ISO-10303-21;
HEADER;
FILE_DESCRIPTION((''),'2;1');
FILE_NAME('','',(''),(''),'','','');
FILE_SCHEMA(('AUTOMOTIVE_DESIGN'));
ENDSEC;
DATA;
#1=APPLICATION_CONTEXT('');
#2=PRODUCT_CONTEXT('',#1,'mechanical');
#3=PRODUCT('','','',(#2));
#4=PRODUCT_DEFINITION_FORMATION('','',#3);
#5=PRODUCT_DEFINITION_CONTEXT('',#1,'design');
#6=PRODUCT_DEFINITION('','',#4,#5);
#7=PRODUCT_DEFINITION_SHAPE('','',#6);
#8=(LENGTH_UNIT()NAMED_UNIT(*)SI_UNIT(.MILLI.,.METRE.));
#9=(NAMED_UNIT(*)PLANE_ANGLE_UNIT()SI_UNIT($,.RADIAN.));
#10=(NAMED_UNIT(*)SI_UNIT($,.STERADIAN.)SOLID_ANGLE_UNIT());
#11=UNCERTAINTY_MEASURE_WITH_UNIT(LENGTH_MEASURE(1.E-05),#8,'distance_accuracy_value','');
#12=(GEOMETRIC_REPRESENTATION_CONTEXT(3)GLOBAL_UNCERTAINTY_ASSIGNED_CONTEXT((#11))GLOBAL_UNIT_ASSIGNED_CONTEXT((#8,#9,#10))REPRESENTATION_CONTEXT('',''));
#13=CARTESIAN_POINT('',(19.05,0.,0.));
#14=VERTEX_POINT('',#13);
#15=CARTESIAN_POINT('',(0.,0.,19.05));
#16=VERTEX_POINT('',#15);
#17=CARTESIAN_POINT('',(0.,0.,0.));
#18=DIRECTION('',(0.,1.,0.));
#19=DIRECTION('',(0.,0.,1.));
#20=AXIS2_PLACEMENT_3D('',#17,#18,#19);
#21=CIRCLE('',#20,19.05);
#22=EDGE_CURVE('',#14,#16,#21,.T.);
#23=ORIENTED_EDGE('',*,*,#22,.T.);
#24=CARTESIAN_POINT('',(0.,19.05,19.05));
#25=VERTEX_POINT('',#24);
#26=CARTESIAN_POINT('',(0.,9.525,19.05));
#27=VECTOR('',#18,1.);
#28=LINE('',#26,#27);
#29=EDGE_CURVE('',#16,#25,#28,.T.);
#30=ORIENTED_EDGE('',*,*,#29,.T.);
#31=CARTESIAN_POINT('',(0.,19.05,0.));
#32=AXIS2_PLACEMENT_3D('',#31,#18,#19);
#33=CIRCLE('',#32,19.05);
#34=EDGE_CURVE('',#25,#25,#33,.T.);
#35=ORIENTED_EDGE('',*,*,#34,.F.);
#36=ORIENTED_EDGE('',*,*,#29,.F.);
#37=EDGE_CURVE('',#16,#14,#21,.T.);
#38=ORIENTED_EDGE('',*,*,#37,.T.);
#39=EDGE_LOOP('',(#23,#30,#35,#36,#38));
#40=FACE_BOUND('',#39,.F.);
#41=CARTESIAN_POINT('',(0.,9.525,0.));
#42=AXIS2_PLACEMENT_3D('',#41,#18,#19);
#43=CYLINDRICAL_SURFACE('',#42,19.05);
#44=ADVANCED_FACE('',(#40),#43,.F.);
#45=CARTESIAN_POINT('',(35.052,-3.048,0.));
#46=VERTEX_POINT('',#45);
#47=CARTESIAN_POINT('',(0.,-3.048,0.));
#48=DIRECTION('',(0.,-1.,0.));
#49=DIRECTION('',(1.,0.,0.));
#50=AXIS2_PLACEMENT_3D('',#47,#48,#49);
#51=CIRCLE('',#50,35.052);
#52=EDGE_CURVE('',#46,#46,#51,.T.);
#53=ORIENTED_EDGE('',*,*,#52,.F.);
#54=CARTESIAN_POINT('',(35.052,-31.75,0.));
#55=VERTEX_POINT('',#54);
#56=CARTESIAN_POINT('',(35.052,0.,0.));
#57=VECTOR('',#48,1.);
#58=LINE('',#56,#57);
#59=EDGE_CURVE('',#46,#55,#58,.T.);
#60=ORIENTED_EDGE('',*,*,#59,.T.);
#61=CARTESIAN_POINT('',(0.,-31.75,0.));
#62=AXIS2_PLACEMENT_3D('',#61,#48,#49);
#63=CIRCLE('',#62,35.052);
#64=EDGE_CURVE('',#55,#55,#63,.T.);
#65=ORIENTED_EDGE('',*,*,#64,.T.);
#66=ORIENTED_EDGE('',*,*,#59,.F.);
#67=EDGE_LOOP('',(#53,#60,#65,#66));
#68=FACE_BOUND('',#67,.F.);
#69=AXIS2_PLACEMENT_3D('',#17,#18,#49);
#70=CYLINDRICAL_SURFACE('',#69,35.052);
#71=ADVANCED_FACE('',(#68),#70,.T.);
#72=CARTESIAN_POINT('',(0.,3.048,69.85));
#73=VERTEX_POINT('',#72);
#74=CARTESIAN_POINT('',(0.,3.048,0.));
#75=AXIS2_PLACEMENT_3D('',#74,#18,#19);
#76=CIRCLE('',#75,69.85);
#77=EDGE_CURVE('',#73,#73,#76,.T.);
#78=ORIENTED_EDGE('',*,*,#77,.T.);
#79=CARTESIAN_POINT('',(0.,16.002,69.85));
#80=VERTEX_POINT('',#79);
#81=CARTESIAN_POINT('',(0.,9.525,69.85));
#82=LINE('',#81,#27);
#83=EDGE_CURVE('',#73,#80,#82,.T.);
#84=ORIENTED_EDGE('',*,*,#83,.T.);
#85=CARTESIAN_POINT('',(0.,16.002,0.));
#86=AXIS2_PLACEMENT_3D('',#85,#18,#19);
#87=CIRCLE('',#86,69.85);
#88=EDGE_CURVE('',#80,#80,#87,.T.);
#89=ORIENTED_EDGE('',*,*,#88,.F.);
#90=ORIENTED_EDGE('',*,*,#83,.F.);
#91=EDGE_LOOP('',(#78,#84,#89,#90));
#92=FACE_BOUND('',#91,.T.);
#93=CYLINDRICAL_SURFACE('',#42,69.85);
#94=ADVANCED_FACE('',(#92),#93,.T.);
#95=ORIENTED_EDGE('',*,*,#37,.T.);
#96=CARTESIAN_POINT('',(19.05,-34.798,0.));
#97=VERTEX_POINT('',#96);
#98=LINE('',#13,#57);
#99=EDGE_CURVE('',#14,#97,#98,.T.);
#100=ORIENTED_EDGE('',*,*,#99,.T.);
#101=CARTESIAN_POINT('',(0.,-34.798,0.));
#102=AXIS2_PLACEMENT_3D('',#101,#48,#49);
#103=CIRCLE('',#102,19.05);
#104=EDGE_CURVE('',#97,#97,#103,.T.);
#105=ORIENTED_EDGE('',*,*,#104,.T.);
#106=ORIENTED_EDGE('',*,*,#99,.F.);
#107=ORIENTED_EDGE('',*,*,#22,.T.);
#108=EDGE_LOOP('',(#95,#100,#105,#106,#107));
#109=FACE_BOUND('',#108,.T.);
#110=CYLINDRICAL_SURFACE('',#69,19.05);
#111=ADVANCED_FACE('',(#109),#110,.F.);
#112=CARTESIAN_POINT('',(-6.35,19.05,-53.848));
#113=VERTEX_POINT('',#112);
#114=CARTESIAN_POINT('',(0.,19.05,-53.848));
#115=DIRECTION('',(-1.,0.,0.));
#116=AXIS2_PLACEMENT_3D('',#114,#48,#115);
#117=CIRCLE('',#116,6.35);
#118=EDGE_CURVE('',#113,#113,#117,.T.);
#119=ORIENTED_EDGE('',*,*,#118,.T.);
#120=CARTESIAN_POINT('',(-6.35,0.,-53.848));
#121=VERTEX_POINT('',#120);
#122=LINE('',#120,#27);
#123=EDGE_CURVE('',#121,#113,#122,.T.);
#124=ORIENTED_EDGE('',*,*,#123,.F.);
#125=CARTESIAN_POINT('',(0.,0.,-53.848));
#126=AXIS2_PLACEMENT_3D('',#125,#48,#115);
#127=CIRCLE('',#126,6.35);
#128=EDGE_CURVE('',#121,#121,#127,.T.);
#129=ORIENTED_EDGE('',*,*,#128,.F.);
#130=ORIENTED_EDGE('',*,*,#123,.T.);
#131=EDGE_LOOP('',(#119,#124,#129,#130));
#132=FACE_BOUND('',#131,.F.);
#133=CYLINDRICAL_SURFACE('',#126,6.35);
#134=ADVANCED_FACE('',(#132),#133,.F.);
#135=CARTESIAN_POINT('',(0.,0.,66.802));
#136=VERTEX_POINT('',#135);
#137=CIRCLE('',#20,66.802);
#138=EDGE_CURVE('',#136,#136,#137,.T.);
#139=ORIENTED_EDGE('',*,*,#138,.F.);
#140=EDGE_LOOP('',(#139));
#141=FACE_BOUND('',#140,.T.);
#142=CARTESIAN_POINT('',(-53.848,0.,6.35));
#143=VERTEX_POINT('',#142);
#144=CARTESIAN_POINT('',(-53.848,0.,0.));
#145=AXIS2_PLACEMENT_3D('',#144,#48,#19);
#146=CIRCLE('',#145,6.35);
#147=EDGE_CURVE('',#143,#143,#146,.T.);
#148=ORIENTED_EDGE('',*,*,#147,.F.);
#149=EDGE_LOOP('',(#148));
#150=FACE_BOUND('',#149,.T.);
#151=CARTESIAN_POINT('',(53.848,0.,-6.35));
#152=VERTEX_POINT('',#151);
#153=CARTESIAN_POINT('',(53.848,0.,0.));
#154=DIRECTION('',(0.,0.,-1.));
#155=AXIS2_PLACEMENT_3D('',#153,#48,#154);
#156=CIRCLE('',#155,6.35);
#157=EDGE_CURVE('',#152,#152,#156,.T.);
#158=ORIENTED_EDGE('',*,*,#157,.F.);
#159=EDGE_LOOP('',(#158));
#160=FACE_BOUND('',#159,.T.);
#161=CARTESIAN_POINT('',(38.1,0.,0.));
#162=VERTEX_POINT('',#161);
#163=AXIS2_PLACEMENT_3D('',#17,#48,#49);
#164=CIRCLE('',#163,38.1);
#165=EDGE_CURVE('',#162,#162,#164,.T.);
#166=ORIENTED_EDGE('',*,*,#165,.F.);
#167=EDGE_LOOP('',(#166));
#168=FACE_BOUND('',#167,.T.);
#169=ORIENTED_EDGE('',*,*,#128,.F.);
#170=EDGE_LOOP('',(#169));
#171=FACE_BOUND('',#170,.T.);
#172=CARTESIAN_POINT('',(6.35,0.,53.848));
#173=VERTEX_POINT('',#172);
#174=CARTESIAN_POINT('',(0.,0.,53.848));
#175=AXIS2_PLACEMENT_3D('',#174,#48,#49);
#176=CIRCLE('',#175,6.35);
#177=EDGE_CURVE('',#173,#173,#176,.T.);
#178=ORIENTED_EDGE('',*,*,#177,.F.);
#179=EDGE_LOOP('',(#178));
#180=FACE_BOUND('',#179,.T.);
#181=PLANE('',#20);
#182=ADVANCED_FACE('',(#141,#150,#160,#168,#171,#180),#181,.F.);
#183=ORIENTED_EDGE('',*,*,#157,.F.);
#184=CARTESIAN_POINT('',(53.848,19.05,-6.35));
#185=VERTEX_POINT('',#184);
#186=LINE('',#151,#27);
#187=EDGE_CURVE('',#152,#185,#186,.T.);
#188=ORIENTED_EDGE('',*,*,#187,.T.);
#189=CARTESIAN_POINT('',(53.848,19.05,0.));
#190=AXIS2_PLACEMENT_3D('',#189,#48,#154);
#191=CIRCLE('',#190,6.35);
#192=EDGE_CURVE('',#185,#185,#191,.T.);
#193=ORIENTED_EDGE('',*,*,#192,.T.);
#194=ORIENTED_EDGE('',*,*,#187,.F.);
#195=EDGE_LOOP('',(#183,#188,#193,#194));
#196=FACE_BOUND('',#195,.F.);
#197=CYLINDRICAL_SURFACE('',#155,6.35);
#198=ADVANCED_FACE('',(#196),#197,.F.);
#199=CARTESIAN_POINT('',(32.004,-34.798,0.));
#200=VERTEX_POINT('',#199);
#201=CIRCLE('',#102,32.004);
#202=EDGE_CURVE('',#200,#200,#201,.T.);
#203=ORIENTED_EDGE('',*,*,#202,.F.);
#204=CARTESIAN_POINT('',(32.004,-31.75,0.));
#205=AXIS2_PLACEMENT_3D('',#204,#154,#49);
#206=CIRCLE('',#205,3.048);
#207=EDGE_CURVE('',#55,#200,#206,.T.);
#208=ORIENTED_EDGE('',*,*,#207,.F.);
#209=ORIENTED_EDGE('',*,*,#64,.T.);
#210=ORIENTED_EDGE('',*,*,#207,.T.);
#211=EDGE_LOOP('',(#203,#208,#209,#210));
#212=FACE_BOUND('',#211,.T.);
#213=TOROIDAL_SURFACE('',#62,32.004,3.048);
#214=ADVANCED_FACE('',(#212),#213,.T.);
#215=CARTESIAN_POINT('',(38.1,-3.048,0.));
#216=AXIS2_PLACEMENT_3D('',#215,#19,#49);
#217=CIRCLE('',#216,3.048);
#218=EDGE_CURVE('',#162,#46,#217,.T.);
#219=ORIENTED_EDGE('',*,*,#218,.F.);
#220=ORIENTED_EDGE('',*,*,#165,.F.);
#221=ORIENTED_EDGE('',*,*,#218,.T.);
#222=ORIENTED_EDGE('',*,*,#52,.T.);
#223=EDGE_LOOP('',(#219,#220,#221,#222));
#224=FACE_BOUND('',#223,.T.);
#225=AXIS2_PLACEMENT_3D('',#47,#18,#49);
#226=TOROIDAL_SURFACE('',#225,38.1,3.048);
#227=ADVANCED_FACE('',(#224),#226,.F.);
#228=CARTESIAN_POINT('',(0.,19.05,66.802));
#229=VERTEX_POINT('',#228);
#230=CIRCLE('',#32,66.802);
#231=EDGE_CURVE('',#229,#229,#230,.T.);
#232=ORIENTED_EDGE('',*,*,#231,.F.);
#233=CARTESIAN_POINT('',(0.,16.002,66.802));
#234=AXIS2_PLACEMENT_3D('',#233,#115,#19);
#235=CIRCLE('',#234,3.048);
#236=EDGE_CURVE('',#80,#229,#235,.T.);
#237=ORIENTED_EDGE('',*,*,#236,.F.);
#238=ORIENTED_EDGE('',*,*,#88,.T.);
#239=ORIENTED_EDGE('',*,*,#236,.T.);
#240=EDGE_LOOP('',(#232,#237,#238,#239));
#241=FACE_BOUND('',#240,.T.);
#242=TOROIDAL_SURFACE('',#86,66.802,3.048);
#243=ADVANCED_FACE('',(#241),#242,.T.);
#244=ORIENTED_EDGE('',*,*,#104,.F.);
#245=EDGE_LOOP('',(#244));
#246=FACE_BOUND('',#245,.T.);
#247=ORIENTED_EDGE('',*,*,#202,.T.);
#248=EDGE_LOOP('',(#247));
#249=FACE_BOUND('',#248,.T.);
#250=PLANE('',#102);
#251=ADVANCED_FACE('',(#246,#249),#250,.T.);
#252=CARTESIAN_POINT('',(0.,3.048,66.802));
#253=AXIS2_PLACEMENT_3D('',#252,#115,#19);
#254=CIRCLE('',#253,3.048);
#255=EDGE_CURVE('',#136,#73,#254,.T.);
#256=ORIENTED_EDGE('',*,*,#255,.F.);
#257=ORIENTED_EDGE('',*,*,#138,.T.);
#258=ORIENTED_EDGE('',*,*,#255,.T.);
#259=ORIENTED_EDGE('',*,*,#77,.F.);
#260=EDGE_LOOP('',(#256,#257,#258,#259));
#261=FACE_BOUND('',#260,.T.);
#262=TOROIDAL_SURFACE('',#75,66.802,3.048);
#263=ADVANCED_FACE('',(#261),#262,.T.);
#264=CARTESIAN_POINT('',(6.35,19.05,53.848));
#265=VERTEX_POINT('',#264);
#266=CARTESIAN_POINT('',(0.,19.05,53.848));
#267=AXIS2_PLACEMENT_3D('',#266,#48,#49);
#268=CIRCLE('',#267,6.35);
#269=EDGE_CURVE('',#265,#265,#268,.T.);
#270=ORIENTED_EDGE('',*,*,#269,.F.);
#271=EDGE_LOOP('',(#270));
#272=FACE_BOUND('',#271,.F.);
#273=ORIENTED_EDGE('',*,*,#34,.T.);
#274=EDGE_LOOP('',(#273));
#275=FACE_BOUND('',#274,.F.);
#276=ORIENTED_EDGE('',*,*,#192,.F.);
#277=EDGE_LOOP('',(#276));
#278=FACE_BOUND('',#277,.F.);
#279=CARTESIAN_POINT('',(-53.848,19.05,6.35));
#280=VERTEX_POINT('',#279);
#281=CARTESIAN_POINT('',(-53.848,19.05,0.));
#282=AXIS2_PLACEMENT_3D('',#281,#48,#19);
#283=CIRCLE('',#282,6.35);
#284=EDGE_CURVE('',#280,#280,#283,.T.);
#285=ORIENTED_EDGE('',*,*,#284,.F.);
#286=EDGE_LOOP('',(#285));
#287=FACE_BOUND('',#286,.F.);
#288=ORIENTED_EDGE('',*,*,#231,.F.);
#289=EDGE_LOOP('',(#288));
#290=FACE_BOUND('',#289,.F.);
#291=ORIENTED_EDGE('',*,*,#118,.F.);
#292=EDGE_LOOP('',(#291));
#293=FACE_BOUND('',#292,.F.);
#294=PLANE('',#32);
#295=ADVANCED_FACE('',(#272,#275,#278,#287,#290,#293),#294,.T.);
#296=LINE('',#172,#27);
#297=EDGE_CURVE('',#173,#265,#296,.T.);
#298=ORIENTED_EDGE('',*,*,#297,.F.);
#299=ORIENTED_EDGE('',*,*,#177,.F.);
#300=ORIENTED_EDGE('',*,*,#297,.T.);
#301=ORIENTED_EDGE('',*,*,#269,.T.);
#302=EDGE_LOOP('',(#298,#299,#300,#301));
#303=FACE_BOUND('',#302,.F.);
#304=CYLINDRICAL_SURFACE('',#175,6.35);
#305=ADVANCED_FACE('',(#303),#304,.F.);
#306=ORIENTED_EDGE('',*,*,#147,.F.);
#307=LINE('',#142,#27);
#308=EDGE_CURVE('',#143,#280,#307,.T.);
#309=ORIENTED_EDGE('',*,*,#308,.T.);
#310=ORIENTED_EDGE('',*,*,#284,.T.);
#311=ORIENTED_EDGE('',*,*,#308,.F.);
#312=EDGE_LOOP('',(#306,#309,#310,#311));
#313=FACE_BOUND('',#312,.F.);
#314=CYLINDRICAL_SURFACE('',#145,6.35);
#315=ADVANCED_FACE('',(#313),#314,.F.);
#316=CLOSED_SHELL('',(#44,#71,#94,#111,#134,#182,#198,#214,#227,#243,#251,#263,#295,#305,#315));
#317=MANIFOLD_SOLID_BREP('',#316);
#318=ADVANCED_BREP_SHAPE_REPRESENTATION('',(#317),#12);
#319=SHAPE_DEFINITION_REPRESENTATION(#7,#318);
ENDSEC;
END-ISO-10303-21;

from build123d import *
from build123d import SkipClean  # not in build123d's __all__

# Parameters (mm, degrees)
F0_W            = 19.05
F0_H            = 50.8
F2_R            = 35.052
F2_R_2          = 19.05
F3_DEPTH        = 34.798
F2_R_3          = 6.35
F4_DEPTH        = 19.051
F4_COPIES_COUNT = 4
F5_R            = 3.048
F6_R            = 3.048


# Not quite as in the source:
# - after a boolean that leaves OpenCascade's solid faulty, fix() repairs it
# - a pattern or mirror of a feature is missing from the dataset's text; its kind, count and spacing are read off the source's solid


with BuildPart() as f1:
    # F0 (on Right) → F1 (revolve)
    with BuildSketch(Plane.YZ):
        with Locations((9.525, 44.45)):
            Rectangle(F0_W, F0_H)
    revolve(axis=Axis((0, 24.8311646283, 0), (0, 1, 0)))

    # F2 (on face) → F3 (join)
    with BuildSketch(Plane.XZ):
        Circle(F2_R)
        Circle(F2_R_2, mode=Mode.SUBTRACT)
    with SkipClean():  # cleaning this boolean's faces spoils the solid; the shape is the same uncleaned
        extrude(amount=F3_DEPTH)

    # F2 (on face) → F4 (cut, through all)
    with BuildSketch(Plane.XZ):
        with Locations((0, 53.848)):
            Circle(F2_R_3)
    f4 = extrude(amount=-F4_DEPTH, mode=Mode.SUBTRACT)

    add(f1.part.fix(), mode=Mode.REPLACE)

    # F4_copies: F4 ×4 about axis
    f4_copies_axis = Axis((0, 0, 0), (0, 1, 0))
    for i in range(1, F4_COPIES_COUNT):
        add(f4.rotate(f4_copies_axis, i * 360 / F4_COPIES_COUNT), clean=False, mode=Mode.SUBTRACT)

    # F5
    f5_edges = [f1.edges().sort_by_distance(p)[0] for p in [
        (0, 0, -69.85),
        (0, 19.05, -69.85),
    ]]
    fillet(f5_edges, radius=F5_R)

    # F6
    f6_edges = [f1.edges().sort_by_distance(p)[0] for p in [
        (35.052, -17.399, 0),
        (-35.052, -34.798, 0),
        (-35.052, 0, 0),
    ]]
    fillet(f6_edges, radius=F6_R)


solid = f1.part
